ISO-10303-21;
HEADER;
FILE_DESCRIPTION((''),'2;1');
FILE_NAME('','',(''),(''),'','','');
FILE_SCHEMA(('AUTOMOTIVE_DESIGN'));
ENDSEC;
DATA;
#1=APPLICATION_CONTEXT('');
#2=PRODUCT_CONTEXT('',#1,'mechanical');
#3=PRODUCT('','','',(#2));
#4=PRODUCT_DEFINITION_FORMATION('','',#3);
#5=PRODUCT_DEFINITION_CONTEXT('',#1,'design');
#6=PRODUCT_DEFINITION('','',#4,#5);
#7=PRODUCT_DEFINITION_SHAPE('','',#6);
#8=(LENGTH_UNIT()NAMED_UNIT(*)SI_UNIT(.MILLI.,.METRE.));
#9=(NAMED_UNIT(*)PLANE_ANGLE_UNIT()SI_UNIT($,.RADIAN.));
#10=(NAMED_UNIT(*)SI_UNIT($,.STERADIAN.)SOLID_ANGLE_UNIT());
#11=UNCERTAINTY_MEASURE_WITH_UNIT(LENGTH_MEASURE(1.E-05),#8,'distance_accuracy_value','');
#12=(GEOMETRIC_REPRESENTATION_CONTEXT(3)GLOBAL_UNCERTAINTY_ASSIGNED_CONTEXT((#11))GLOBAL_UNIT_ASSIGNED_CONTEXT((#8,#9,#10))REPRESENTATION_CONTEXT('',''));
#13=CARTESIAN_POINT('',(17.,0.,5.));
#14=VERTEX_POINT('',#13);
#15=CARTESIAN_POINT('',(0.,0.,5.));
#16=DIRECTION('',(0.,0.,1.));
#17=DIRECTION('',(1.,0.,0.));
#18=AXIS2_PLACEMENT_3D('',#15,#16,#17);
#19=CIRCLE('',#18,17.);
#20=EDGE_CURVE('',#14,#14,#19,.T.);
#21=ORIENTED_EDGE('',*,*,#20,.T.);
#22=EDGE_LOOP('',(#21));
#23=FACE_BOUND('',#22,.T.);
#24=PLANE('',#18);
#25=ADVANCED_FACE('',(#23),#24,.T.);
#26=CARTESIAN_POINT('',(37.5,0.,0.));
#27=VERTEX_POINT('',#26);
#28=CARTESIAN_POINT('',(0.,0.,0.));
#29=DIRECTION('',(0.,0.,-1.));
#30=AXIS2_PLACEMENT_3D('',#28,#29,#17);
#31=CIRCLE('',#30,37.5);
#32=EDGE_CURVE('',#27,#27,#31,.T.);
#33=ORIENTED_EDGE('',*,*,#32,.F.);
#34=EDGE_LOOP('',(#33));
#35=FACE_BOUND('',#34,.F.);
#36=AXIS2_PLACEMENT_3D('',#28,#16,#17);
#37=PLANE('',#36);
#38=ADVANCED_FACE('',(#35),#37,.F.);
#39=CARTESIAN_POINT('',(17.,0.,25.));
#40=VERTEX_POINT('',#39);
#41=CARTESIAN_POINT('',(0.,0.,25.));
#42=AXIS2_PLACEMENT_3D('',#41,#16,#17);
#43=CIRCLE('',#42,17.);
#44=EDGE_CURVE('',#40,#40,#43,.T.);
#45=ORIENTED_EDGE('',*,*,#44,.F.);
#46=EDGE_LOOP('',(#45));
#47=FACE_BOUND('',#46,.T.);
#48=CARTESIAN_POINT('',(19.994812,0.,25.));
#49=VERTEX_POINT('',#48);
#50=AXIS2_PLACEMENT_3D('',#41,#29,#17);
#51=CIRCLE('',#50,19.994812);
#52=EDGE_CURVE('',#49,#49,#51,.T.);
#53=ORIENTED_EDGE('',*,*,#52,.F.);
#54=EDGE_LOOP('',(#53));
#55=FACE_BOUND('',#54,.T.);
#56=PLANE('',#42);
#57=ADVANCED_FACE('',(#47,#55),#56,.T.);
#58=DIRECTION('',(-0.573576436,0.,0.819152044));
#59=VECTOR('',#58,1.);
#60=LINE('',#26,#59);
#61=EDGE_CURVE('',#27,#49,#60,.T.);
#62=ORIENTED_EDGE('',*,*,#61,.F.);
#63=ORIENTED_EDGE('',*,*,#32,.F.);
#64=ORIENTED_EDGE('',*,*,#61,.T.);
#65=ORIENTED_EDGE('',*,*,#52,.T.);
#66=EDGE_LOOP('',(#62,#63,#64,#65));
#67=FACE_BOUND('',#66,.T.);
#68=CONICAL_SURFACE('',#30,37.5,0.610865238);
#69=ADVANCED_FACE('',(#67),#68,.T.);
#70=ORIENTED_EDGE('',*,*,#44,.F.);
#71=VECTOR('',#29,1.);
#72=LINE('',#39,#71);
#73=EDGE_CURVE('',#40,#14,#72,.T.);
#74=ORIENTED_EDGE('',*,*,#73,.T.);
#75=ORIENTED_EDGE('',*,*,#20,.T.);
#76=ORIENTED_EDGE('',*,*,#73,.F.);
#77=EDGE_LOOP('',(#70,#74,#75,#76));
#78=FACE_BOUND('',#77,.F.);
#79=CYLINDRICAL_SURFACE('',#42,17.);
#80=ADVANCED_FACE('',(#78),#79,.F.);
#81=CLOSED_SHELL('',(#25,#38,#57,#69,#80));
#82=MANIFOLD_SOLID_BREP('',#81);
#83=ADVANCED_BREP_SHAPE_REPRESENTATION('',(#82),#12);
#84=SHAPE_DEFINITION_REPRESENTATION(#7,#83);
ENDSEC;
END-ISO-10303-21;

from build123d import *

# Parameters (mm, degrees)
F0_R     = 37.5
F1_DEPTH = 25
F1_TAPER = 35
F2_R     = 17
F3_DEPTH = 20


with BuildPart() as f1:
    # F0 (on Top) → F1 (new body)
    with BuildSketch(Plane.XY):
        Circle(F0_R)
    extrude(amount=F1_DEPTH, taper=F1_TAPER)

    # F2 (on face) → F3 (cut)
    with BuildSketch(Plane.XY.offset(25)):
        Circle(F2_R)
    extrude(amount=-F3_DEPTH, mode=Mode.SUBTRACT)


solid = f1.part
